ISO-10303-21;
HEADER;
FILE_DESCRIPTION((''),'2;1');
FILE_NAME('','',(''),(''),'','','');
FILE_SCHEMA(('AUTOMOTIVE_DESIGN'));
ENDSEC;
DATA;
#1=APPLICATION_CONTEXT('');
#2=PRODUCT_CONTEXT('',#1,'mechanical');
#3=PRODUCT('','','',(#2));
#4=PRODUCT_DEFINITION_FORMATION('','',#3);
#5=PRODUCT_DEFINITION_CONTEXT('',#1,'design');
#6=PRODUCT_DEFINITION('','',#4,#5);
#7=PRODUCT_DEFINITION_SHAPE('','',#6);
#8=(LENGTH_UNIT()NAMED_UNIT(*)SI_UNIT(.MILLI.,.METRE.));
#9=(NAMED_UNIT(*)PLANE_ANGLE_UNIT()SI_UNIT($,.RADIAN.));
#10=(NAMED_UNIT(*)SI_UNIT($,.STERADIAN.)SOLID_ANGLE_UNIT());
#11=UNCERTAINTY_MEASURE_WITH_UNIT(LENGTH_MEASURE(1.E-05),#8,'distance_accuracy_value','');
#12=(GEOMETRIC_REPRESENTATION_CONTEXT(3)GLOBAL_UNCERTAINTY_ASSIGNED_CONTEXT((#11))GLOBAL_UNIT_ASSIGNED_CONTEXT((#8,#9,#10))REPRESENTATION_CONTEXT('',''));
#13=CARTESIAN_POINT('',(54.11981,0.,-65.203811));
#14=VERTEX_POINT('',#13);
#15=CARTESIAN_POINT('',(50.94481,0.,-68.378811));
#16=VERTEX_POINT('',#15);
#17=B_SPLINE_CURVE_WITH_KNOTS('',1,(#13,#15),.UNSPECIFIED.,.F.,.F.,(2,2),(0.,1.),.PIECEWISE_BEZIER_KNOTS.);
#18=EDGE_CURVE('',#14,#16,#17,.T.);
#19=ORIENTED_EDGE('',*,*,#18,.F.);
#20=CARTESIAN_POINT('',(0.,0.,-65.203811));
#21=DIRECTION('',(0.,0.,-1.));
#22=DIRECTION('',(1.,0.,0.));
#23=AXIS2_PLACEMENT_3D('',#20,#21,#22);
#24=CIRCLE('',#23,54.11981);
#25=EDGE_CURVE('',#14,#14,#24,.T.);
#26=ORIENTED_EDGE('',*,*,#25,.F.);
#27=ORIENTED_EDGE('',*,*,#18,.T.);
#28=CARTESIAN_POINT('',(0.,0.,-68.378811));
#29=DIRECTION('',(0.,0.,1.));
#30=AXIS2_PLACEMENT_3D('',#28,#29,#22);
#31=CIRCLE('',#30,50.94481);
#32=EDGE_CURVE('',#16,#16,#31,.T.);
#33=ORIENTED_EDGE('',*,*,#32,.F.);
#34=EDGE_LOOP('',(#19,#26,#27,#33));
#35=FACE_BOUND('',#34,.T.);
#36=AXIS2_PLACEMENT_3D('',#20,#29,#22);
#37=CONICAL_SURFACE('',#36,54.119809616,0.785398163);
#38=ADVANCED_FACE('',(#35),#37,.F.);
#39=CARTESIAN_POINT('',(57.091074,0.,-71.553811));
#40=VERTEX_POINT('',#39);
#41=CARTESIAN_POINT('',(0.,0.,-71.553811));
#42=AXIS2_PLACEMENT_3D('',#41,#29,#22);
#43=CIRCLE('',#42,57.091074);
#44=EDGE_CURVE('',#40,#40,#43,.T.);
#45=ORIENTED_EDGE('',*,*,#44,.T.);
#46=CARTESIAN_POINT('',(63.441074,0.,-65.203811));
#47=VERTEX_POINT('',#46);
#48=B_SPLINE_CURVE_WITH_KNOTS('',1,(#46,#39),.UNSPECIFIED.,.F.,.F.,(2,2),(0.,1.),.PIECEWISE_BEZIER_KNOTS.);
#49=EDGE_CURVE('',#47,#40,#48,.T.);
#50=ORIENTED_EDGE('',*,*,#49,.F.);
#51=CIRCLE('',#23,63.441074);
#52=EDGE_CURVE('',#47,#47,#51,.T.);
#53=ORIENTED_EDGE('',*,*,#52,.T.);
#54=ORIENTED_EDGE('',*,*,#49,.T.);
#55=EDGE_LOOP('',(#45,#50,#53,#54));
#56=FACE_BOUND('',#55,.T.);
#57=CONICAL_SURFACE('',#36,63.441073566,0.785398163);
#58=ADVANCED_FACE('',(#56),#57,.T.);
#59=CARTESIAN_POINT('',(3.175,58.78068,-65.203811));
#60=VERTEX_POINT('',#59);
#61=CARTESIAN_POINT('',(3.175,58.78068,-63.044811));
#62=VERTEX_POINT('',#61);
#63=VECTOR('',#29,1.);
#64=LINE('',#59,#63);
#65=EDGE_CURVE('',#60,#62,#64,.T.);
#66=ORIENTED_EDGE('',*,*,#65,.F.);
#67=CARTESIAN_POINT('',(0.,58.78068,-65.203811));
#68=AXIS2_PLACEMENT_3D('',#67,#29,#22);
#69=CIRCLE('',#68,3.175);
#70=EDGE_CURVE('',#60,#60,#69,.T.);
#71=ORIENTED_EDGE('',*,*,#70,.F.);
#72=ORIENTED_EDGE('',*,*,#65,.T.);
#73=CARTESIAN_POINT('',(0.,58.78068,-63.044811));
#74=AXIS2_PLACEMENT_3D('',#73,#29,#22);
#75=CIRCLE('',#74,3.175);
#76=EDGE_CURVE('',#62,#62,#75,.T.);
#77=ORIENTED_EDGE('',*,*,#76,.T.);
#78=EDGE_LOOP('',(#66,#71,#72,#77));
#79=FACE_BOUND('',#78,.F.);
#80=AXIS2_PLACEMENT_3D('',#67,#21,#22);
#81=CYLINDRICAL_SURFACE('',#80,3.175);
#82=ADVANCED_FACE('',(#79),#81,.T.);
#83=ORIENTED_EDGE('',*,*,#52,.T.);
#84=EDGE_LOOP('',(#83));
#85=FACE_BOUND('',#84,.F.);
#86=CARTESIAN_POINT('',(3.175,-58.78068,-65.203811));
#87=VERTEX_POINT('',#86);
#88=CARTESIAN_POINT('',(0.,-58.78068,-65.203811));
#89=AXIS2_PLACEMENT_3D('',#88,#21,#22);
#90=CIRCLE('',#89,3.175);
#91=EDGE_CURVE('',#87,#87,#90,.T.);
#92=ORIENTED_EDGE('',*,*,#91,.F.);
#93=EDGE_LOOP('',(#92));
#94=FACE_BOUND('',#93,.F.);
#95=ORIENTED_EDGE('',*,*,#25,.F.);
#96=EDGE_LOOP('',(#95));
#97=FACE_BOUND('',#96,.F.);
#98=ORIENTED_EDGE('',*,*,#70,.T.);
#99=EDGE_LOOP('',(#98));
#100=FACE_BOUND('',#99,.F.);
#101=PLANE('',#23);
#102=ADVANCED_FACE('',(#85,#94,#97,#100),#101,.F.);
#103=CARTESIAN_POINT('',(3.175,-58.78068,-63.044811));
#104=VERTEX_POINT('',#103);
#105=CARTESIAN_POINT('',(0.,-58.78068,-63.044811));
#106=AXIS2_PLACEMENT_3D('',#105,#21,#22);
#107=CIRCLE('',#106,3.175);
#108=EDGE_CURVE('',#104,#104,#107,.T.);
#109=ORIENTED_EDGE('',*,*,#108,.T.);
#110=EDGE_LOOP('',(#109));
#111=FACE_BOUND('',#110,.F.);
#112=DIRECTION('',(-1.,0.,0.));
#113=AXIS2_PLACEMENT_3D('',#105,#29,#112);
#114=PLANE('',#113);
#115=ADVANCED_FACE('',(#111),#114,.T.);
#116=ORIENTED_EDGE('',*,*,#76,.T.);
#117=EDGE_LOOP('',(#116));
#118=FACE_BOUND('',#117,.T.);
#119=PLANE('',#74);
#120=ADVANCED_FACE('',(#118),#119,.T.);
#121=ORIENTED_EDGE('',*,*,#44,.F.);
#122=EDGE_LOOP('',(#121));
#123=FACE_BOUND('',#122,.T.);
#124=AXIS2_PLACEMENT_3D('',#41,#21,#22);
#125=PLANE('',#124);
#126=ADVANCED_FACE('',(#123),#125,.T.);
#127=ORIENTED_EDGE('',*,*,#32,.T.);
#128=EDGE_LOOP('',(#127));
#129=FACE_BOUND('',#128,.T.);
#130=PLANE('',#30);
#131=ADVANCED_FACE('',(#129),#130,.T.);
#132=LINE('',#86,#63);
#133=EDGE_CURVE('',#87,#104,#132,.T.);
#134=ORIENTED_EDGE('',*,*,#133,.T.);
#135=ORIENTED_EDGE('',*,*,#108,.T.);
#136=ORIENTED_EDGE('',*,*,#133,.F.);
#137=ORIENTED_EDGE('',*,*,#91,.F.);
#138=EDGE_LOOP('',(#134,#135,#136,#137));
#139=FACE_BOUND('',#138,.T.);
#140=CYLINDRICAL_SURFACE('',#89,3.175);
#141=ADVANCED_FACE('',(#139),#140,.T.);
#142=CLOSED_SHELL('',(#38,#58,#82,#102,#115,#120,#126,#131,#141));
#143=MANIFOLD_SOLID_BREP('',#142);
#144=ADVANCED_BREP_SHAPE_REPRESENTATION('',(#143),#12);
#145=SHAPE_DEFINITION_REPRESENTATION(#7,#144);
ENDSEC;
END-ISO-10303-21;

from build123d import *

# Parameters (mm, degrees)
F0_R      = 50.8
F1_DEPTH  = 38.1
F1_TAPER  = 35
F2_R      = 44.45
F3_DEPTH  = 31.75
F3_TAPER  = 35
F6_R      = 6.35
F13_W     = 40.0871150196
F13_H     = 221.6413393617
F14_DEPTH = 38.1
F16_R     = 63.4410735664
F17_DEPTH = 6.35
F17_TAPER = 45
F18_R     = 54.1198096159
F19_DEPTH = 3.175
F19_TAPER = 45
F20_R     = 2.38125
F21_DEPTH = 6.35
F23_W     = 544.7718501091
F23_H     = 283.927500248
F24_DEPTH = 65.204810909
F25_R     = 3.175
F26_DEPTH = 2.159


# Not quite as in the source:
# - a feature of the source that left no trace in its solid (it failed there, or was rolled back) is left out
# - a feature names something its author has since deleted; it is built from what else it names


with BuildPart() as f1:
    # F0 (on Top) → F1 (new body)
    with BuildSketch(Plane.XY):
        Circle(F0_R)
    extrude(amount=-F1_DEPTH, taper=F1_TAPER)

    # F2 (on face) → F3 (cut)
    with BuildSketch(Plane.XY):
        Circle(F2_R)
    extrude(amount=-F3_DEPTH, taper=F3_TAPER, mode=Mode.SUBTRACT)

    # F9: F7 across plane


with BuildPart() as f7:
    # F7: sweep along a path in F4
    with BuildLine(Plane.YZ) as f7_path:
        add(Plane.YZ * Edge.make_bspline(
            [(-50.8, 0), (-59.5457513783, -8.9993874064), (-82.8005315743, -30.8254243712), (-59.2938947205, -72.9983075974), (-50.8, -97.5854156721)],
            knots=[0, 0, 0, 0, 0.421582605, 1, 1, 1, 1], degree=3))
    # F6 (on plane+point) → F7 (sweep)
    with BuildSketch(Plane.XZ.offset(50.8)):
        with Locations((0, -6.35)):
            Circle(F6_R)
    sweep(path=f7_path.line)


with BuildPart() as f1_1:
    add(f1.part)
    add(f7.part.mirror(Plane.XZ))


with BuildPart() as f14_tool:
    # F13 (on plane+point) → F14 (new body)
    with BuildSketch(Plane.XY.offset(-103.303810809)):
        with Locations((2.3701563478, 10.5300284922)):
            Rectangle(F13_W, F13_H)
    extrude(amount=F14_DEPTH)


with BuildPart() as f1_2:
    add(f1_1.part)

    # F14: cut by f14_tool
    add(f14_tool.part, mode=Mode.SUBTRACT)



with BuildPart() as f7_1:
    add(f7.part)

    # F14: cut by f14_tool
    add(f14_tool.part, mode=Mode.SUBTRACT)


with BuildPart() as f1_3:
    add(f1_2.part)

    add(f7_1.part)  # F17 merges F7
    # F16 (on face) → F17 (join)
    with BuildSketch(Plane(origin=(0, 0, -65.203810809), x_dir=(1, 0, 0), z_dir=(0, 0, -1))):
        Circle(F16_R)
    extrude(amount=F17_DEPTH, taper=F17_TAPER)

    # F18 (on face) → F19 (cut)
    with BuildSketch(Plane.XY.offset(-65.203810809)):
        Circle(F18_R)
    extrude(amount=-F19_DEPTH, taper=F19_TAPER, mode=Mode.SUBTRACT)

    # F20 (on face) → F21 (cut, through all)
    with BuildSketch(Plane.XY.offset(-31.75)):
        Circle(F20_R)
    extrude(amount=-F21_DEPTH, mode=Mode.SUBTRACT)

    # F23 (on offset) → F24 (cut, through all)
    with BuildSketch(Plane.XY.offset(-65.203810809)):
        Rectangle(F23_W, F23_H)
    extrude(amount=F24_DEPTH, mode=Mode.SUBTRACT)

    # F25 (on face) → F26 (join)
    with BuildSketch(Plane.XY.offset(-65.203810809)):
        with Locations((0, 58.78068)):
            Circle(F25_R)
    f26 = extrude(amount=F26_DEPTH)

    # F27: F26 across plane
    add(f26.mirror(Plane.XZ))


solid = f1_3.part
